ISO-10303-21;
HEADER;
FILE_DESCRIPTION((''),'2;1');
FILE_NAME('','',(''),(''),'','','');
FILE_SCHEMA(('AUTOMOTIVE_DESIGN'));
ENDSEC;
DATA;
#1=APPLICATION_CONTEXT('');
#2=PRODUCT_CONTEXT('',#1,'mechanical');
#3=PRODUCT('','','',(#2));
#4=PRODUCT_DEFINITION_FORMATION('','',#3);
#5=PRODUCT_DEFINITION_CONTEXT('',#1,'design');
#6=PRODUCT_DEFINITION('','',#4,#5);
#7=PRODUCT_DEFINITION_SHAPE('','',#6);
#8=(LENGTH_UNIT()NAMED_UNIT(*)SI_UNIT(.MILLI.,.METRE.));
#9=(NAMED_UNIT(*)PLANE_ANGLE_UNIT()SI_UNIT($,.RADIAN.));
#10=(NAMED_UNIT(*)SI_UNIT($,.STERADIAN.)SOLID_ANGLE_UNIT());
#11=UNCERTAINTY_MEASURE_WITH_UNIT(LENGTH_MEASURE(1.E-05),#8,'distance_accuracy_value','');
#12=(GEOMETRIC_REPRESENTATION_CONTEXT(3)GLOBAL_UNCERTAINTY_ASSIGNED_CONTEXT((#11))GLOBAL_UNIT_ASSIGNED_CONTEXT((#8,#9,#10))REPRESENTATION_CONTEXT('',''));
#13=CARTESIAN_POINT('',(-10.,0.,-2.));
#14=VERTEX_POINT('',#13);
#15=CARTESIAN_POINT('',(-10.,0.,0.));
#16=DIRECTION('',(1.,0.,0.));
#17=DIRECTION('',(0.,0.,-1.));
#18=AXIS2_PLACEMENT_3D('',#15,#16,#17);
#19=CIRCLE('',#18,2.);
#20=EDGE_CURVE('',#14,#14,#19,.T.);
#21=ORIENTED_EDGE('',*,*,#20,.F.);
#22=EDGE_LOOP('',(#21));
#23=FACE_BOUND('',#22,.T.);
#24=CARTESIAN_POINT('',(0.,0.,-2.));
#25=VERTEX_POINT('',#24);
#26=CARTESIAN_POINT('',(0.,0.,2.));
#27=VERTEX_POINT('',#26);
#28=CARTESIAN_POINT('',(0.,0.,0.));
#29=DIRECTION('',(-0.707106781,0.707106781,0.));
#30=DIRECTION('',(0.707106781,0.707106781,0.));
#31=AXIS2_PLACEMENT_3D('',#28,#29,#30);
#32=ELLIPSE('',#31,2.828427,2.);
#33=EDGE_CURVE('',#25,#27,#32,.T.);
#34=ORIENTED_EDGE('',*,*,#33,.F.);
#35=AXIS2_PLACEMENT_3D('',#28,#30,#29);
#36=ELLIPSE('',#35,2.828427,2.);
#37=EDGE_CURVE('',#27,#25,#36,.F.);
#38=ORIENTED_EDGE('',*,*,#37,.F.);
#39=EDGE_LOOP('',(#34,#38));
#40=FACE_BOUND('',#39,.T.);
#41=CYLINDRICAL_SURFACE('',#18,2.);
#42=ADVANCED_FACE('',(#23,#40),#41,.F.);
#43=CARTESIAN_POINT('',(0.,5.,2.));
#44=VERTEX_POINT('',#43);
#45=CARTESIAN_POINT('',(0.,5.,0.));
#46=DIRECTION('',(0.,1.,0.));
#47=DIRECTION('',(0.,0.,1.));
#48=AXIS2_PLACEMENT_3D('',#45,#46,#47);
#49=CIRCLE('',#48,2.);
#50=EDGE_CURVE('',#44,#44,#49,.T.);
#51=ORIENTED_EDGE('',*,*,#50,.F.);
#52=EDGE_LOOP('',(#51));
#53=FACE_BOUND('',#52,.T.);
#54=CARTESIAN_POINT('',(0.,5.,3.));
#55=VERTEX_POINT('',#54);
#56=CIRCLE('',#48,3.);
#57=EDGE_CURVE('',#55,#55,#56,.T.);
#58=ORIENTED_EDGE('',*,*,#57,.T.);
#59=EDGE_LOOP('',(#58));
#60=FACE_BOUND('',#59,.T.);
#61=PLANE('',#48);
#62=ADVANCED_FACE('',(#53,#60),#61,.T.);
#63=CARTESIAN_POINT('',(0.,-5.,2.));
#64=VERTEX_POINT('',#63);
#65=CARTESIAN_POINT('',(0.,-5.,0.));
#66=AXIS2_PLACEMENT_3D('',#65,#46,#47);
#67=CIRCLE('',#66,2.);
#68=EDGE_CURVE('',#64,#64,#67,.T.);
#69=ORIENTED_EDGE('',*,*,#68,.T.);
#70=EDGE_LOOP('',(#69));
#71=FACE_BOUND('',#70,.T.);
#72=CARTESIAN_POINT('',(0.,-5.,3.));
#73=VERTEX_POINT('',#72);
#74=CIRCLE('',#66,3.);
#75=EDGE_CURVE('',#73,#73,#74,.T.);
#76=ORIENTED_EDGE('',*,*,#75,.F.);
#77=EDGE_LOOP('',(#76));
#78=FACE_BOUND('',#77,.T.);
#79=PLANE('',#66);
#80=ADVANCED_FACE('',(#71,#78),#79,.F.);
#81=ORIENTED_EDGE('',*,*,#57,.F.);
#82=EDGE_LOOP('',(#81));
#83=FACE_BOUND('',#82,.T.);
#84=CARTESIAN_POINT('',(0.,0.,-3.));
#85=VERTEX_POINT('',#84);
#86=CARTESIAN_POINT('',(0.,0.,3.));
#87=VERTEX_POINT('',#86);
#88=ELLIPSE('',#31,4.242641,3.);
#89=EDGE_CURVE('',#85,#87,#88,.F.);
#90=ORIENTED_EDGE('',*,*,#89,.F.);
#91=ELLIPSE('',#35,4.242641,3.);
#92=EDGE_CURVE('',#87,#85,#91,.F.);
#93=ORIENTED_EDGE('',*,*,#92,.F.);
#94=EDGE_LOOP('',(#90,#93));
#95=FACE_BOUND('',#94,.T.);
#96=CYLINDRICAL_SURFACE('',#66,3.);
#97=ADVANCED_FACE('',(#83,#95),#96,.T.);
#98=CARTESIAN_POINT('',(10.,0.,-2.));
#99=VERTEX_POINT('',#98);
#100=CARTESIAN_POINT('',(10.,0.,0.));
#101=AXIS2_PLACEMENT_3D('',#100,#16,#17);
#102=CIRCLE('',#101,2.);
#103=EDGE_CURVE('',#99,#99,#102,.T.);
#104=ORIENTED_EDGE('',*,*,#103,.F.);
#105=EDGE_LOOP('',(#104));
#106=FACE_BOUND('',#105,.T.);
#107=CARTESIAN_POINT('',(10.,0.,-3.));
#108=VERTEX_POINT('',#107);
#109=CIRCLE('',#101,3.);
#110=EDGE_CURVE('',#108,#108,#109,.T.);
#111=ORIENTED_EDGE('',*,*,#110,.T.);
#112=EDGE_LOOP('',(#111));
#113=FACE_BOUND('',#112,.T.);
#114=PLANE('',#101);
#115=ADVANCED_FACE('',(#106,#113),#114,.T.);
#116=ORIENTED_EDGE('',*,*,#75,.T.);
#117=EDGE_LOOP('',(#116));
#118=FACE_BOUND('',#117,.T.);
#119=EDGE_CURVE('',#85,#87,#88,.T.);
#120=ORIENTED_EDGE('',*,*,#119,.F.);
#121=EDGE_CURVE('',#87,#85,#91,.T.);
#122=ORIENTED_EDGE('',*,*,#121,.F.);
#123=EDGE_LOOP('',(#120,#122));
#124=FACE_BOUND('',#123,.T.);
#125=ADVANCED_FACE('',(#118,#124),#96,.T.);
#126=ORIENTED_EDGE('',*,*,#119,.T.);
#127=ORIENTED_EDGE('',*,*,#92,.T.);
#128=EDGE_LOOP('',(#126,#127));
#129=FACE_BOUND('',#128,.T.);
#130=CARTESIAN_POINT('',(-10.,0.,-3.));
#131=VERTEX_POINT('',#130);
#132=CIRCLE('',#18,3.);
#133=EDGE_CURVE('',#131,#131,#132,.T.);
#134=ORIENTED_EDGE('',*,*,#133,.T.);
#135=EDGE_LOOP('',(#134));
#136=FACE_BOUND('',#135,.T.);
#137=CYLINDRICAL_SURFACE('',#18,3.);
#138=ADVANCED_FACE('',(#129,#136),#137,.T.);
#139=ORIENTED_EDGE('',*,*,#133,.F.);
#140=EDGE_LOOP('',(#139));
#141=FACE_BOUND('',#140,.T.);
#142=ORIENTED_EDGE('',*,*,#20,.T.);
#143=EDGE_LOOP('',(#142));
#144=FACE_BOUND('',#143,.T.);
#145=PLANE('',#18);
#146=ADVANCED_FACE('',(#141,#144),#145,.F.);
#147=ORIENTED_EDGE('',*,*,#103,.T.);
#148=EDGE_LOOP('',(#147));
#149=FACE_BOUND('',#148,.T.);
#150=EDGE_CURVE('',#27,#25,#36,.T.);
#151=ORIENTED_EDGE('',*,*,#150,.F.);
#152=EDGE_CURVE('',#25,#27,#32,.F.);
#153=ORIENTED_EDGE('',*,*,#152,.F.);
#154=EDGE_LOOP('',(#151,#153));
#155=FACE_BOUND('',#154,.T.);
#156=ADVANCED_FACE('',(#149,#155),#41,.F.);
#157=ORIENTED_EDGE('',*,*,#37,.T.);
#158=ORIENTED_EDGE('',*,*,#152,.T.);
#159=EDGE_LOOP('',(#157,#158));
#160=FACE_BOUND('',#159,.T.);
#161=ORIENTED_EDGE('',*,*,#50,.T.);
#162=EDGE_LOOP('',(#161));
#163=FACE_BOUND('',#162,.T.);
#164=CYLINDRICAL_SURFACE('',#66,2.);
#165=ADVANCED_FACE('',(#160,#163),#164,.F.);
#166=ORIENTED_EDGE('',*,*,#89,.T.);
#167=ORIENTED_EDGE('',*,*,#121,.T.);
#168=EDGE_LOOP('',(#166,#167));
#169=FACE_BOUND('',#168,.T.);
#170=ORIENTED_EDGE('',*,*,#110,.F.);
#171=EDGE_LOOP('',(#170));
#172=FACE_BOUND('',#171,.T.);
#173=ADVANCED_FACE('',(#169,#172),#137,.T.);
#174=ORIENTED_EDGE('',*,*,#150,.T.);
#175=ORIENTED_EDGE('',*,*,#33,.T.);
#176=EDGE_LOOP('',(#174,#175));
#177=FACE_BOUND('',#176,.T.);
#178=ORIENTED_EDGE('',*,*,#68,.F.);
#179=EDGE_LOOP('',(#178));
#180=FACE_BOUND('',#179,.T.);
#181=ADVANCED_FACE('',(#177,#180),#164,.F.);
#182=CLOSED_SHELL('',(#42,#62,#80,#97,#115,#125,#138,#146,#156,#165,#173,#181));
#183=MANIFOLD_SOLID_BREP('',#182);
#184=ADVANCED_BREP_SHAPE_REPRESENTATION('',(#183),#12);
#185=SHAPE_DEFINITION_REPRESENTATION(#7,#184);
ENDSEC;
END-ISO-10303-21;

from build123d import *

# Parameters (mm, degrees)
BOSS_EXTRUDE1_DEPTH      = 5
BOSS_EXTRUDE1_DEPTH_BACK = 5
SKETCH1_R                = 3
BOSS_EXTRUDE3_DEPTH      = 10
BOSS_EXTRUDE3_DEPTH_BACK = 10
SKETCH2_R                = 3
SHELL2_START             = -5
SHELL2_OUTLINE_R         = 2
SHELL2_DEPTH             = 10
SHELL2_START_2           = -10
SHELL2_2_OUTLINE_R       = 2
SHELL2_2_DEPTH           = 20


with BuildPart() as part:
    # Sketch1 → Boss-Extrude1 (new, two sides: drawn at the far end of the back side and taken through both)
    with BuildSketch(Plane(origin=(0, 0, 0), x_dir=(1, 0, 0), z_dir=(0, 1, 0)).offset(-BOSS_EXTRUDE1_DEPTH_BACK)):
        with Locations(Location((0, 0, 0), (0, 0, 270))):
            Circle(SKETCH1_R)
    extrude(amount=BOSS_EXTRUDE1_DEPTH + BOSS_EXTRUDE1_DEPTH_BACK)

    # Sketch2 → Boss-Extrude3 (add, two sides: drawn at the far end of the back side and taken through both)
    with BuildSketch(Plane(origin=(0, 0, 0), x_dir=(0, 0, -1), z_dir=(1, 0, 0)).offset(-BOSS_EXTRUDE3_DEPTH_BACK)):
        Circle(SKETCH2_R)
    extrude(amount=BOSS_EXTRUDE3_DEPTH + BOSS_EXTRUDE3_DEPTH_BACK)

    # Shell2: read off the stored shape, not the designer's step
    # Shell2 outline → Shell2 (cut)
    with BuildSketch(Plane(origin=(0, 0, 0), x_dir=(1, 0, 0), z_dir=(0, 1, 0)).offset(SHELL2_START)):
        Circle(SHELL2_OUTLINE_R)
    extrude(amount=SHELL2_DEPTH, mode=Mode.SUBTRACT)

    # Shell2 2 outline → Shell2 2 (cut)
    with BuildSketch(Plane.YZ.offset(SHELL2_START_2)):
        Circle(SHELL2_2_OUTLINE_R)
    extrude(amount=SHELL2_2_DEPTH, mode=Mode.SUBTRACT)


solid = part.part
